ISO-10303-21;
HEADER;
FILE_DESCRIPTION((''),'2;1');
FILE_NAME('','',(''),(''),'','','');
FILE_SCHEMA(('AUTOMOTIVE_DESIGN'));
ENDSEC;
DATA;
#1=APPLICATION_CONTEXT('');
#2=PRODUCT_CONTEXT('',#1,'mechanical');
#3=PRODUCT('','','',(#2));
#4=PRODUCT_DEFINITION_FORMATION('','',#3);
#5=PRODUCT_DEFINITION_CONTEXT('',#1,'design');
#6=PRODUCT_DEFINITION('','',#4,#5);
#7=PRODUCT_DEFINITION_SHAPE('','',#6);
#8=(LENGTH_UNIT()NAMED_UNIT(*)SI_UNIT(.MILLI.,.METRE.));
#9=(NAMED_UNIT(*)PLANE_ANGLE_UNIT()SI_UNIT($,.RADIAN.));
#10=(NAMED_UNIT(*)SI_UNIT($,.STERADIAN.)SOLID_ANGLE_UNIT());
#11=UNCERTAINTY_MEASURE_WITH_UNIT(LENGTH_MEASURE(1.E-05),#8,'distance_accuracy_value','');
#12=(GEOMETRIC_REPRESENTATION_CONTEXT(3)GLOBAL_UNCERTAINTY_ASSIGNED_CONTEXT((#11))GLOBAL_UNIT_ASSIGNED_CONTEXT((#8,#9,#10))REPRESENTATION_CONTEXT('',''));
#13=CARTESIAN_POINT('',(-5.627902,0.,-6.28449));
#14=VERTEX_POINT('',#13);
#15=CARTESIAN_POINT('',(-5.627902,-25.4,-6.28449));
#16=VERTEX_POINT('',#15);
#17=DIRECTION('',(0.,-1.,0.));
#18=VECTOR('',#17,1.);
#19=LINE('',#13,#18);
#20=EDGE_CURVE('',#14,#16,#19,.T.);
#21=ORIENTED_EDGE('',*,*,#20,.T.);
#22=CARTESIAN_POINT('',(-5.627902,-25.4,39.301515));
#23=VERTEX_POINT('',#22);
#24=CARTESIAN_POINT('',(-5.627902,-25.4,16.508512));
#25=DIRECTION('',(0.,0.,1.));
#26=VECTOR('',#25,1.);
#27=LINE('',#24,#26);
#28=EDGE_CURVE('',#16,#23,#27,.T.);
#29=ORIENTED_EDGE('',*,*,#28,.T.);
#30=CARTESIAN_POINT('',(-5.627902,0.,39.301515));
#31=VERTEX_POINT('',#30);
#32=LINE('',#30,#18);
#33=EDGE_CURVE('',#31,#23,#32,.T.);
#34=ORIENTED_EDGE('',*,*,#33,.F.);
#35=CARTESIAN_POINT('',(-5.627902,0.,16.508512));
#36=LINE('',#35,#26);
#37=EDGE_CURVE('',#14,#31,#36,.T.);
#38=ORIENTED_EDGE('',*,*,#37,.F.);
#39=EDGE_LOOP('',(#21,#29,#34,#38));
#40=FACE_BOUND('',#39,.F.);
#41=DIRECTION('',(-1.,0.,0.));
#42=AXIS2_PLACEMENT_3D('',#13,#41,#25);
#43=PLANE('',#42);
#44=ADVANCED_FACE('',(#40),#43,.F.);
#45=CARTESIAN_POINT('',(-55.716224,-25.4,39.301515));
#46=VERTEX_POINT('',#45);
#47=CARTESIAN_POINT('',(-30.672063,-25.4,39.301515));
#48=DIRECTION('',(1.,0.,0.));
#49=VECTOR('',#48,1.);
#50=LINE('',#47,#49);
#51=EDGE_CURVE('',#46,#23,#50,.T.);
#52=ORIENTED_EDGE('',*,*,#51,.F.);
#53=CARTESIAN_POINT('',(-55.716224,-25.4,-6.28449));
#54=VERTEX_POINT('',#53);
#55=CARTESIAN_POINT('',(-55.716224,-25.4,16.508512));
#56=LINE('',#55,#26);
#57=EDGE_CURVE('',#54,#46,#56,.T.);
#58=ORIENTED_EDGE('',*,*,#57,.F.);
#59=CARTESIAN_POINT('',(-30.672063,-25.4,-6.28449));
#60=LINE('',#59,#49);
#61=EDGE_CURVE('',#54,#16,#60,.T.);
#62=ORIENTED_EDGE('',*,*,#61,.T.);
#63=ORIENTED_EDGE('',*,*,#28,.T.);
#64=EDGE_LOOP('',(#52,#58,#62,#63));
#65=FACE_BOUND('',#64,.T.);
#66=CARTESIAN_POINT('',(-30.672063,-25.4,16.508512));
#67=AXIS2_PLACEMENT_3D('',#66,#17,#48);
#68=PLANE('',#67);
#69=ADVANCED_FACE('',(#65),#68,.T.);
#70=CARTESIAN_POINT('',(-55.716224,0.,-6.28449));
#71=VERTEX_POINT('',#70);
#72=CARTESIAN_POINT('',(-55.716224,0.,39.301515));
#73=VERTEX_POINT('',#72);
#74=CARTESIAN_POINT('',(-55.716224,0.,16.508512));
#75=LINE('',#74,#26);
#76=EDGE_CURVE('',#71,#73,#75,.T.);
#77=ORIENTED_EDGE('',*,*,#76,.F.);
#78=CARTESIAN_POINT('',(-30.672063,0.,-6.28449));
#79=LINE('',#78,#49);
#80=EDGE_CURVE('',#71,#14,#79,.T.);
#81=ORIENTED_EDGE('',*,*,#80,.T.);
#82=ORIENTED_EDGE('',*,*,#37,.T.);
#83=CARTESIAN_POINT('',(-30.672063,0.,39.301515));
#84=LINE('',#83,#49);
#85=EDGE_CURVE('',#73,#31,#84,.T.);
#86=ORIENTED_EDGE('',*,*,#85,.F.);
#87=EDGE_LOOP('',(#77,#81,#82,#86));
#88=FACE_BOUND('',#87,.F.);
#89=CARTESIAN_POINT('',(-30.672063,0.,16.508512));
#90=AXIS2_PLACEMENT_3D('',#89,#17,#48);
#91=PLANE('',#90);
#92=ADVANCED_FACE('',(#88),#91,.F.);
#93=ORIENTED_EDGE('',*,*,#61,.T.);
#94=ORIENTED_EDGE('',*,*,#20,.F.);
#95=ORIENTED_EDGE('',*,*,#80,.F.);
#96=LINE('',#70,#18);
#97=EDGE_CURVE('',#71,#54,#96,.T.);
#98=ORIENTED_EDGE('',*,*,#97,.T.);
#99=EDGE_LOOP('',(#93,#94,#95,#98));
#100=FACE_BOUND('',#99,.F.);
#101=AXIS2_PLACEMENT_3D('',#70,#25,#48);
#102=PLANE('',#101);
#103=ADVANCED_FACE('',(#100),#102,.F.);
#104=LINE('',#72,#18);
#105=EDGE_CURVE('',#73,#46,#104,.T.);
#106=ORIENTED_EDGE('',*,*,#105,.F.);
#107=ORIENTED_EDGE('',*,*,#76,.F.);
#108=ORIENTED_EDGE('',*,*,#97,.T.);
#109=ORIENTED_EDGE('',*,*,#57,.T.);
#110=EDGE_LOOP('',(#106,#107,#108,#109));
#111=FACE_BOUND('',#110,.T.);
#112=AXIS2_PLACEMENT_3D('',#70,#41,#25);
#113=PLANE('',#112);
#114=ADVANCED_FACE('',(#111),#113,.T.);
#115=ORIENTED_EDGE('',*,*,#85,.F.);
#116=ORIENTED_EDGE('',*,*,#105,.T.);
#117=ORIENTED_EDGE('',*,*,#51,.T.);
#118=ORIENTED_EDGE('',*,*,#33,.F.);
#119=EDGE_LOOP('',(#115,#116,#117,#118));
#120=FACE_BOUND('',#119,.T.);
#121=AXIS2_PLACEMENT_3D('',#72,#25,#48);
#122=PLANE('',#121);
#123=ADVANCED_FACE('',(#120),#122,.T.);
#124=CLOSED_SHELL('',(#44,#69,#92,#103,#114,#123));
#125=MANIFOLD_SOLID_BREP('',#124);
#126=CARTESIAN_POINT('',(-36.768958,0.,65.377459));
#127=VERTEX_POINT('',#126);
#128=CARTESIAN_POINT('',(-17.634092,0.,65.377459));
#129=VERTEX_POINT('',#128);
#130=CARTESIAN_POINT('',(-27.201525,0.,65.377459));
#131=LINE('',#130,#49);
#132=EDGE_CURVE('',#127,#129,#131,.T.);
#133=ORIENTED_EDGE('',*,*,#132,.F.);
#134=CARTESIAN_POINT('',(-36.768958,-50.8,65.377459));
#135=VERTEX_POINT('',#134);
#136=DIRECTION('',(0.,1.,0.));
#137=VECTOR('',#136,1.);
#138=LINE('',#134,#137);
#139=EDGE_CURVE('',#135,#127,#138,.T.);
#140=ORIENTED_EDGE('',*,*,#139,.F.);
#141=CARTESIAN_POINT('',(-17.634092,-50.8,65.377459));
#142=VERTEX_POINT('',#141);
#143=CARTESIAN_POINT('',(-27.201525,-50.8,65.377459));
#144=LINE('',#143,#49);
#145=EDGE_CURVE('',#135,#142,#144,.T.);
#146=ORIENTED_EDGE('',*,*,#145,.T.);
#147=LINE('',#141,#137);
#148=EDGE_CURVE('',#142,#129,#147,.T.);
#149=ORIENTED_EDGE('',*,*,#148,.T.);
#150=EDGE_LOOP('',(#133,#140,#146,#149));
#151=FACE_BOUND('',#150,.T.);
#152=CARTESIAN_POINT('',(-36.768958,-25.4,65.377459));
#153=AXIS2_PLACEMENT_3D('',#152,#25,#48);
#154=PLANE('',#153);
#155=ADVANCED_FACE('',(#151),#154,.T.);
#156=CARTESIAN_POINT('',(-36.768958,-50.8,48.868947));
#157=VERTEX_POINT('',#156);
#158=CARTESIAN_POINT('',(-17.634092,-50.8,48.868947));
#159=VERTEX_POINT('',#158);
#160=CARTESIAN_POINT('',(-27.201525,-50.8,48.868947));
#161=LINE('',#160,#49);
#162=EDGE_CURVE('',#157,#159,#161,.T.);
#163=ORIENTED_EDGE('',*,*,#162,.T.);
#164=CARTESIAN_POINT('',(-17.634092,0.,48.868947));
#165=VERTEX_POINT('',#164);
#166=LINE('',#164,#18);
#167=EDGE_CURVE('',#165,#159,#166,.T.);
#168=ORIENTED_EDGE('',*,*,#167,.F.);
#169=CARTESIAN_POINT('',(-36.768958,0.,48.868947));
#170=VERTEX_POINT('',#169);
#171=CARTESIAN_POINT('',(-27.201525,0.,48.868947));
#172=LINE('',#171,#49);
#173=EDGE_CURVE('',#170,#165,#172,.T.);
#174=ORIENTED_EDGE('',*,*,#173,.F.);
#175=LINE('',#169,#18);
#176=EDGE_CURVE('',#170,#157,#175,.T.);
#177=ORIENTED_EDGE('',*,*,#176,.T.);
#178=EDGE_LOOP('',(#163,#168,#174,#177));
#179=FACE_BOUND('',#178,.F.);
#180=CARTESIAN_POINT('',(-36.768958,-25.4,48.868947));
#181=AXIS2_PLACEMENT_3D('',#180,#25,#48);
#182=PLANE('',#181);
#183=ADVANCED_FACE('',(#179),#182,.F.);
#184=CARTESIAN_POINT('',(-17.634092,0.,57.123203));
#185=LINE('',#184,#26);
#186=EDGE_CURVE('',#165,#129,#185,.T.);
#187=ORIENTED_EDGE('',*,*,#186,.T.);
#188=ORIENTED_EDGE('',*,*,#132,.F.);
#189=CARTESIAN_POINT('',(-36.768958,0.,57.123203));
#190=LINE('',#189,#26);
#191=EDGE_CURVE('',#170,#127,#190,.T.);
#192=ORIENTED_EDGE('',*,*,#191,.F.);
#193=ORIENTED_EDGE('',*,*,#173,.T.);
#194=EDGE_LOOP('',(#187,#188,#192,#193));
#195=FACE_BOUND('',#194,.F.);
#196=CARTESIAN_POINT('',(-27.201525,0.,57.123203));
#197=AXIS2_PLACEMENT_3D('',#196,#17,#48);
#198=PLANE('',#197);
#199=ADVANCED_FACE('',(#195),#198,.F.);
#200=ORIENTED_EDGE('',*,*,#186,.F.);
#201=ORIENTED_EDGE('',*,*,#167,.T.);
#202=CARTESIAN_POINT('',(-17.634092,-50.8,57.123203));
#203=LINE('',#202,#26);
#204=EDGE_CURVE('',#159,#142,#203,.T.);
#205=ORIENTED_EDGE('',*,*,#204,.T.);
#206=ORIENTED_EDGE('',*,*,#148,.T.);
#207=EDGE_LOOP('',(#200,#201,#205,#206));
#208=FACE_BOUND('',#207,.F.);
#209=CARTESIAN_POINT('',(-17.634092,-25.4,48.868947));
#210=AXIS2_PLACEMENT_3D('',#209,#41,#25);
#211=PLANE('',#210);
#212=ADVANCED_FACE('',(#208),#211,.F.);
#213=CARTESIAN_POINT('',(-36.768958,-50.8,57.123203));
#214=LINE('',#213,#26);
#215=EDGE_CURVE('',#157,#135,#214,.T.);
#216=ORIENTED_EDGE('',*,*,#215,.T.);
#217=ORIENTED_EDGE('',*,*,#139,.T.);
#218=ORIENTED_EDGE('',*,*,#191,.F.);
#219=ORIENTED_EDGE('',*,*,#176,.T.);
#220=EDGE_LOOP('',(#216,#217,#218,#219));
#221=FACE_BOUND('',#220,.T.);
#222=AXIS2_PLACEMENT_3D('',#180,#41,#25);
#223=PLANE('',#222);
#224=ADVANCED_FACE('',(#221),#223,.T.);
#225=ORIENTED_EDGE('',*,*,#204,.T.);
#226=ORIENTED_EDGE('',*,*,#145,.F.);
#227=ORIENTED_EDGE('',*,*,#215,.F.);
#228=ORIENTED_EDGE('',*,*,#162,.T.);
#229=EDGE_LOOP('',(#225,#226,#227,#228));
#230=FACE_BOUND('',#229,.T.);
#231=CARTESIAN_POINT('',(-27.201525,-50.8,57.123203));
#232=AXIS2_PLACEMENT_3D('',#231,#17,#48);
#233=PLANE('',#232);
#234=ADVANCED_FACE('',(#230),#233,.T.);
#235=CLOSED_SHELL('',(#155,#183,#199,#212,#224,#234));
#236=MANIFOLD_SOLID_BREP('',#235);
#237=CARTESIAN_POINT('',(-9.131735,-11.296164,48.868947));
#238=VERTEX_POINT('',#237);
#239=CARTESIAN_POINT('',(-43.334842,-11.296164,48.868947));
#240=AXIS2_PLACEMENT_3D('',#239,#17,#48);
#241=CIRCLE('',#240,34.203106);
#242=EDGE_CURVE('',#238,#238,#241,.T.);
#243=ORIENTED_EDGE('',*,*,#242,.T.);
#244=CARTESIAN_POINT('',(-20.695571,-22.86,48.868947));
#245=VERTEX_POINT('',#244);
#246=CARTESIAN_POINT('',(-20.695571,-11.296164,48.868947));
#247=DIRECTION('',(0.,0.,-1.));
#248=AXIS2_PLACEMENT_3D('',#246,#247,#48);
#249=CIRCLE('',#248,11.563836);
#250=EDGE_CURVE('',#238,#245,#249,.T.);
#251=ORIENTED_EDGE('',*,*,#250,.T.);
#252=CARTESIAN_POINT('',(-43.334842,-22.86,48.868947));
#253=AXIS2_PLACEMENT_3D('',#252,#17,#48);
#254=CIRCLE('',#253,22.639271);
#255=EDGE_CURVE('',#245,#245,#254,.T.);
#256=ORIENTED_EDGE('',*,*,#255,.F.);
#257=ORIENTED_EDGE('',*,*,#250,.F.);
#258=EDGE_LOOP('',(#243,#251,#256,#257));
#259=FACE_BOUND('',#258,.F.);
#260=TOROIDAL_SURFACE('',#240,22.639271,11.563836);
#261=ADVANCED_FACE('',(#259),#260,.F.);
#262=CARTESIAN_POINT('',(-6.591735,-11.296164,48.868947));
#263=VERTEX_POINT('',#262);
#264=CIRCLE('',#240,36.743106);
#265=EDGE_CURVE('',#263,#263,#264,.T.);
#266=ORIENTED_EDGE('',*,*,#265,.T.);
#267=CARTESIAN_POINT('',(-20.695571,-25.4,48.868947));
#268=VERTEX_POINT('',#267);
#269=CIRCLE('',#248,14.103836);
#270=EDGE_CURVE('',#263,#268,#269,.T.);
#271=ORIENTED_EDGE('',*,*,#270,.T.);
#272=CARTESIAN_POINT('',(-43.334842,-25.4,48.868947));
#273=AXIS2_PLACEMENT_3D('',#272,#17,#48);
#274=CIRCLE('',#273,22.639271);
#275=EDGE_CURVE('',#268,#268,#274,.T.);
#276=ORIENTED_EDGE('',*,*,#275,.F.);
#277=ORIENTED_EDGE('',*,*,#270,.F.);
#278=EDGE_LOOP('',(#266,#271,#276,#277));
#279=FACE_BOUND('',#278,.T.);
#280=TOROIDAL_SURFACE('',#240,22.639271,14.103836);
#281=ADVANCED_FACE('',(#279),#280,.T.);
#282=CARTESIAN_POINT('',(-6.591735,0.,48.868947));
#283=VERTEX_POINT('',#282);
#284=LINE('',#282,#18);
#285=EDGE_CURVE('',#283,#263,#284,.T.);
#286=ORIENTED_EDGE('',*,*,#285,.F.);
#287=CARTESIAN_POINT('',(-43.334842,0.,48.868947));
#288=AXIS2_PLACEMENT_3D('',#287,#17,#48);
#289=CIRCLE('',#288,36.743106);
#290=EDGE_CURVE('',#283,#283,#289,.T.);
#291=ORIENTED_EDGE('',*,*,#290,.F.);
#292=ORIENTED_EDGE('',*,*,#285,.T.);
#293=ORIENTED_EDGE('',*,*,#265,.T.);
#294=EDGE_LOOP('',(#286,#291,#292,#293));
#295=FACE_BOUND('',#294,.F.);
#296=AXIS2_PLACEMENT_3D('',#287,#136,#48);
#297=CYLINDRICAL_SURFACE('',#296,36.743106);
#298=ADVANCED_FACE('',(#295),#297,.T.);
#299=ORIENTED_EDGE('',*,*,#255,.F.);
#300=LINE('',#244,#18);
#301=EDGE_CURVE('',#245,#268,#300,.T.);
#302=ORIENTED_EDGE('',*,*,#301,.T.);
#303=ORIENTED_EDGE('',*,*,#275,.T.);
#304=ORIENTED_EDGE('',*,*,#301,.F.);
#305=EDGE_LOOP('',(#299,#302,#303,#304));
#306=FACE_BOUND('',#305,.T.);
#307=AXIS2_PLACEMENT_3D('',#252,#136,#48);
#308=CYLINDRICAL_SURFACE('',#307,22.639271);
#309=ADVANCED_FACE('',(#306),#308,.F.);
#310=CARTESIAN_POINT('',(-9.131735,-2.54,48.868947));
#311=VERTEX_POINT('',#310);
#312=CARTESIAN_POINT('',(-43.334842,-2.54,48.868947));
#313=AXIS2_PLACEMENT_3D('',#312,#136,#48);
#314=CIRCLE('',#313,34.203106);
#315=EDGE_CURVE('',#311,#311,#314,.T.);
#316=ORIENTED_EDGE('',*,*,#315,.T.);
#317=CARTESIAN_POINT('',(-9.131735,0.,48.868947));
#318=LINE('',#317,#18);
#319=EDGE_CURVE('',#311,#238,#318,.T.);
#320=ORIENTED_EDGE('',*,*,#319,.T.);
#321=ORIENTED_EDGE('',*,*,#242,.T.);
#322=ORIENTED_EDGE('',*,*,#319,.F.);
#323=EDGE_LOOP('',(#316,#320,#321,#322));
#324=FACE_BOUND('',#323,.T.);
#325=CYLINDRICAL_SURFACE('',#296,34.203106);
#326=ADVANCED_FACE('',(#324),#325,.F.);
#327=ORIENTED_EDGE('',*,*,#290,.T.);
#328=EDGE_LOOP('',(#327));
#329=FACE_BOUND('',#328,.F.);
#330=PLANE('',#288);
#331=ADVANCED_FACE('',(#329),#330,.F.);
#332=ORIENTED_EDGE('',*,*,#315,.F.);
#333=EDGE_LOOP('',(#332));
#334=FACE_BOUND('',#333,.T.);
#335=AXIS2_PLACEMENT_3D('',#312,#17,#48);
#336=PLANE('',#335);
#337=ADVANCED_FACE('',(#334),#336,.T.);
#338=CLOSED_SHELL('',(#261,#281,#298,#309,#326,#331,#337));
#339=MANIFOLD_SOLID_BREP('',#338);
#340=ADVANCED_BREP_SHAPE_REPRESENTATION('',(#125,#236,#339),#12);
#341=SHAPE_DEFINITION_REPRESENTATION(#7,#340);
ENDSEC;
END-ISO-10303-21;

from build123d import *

# Parameters (mm, degrees)
F1_W     = 19.1348660737
F1_H     = 16.5085121989
F2_DEPTH = 25.4
F1_W_2   = 50.0883217901
F1_H_2   = 45.5860048532
F0_R     = 36.7431063658
F3_R     = 14.1038356314
F4_T     = -2.54
F5_DEPTH = 25.4


# Not quite as in the source:
# - a shell that OpenCascade refuses in one call is made with other operations: the cavity is built on its own and cut out


with BuildPart() as f2:
    # F1 (on Front) → F2 (new body)
    with BuildSketch(Plane.XZ):
        with Locations((-27.2015249357, 57.1232028306)):
            Rectangle(F1_W, F1_H)
    extrude(amount=F2_DEPTH)

    # F5 (add): a face of the model
    f5_faces = [f2.faces().sort_by_distance(p)[0] for p in [
        (-27.2015249357, -25.4, 57.1232028306),
    ]]
    extrude(f5_faces, amount=F5_DEPTH)


with BuildPart() as f2b:
    # F1 (on Front) → F2, piece 2 (new body)
    with BuildSketch(Plane.XZ):
        with Locations((-30.6720631197, 16.5085121989)):
            Rectangle(F1_W_2, F1_H_2)
    extrude(amount=F2_DEPTH)


with BuildPart() as f2c:
    # F0 (on Front) → F2, piece 3 (new body)
    with BuildSketch(Plane.XZ):
        with Locations((-43.3348417282, 48.8689467311)):
            Circle(F0_R)
    extrude(amount=F2_DEPTH)

    # F3
    f3_edges = [f2c.edges().sort_by_distance(p)[0] for p in [
        (-80.077948, -25.4, 48.868947),
    ]]
    fillet(f3_edges, radius=F3_R)

    # F4: a shell. OpenCascade refuses it in one call, so the cavity is built on its own and cut out:
    # the body offset inwards by the wall thickness, plus a prism from it out through each open face.
    f4_core = offset(f2c.part, amount=F4_T, mode=Mode.PRIVATE)
    f4_exits = [f4_core.faces().sort_by_distance(p)[0] for p in [
        (-43.334842, -22.86, 48.868947),
    ]]
    add(f4_core, mode=Mode.SUBTRACT)
    extrude(f4_exits, amount=-F4_T, mode=Mode.SUBTRACT)


solid = Compound([f2.part, f2b.part, f2c.part])
